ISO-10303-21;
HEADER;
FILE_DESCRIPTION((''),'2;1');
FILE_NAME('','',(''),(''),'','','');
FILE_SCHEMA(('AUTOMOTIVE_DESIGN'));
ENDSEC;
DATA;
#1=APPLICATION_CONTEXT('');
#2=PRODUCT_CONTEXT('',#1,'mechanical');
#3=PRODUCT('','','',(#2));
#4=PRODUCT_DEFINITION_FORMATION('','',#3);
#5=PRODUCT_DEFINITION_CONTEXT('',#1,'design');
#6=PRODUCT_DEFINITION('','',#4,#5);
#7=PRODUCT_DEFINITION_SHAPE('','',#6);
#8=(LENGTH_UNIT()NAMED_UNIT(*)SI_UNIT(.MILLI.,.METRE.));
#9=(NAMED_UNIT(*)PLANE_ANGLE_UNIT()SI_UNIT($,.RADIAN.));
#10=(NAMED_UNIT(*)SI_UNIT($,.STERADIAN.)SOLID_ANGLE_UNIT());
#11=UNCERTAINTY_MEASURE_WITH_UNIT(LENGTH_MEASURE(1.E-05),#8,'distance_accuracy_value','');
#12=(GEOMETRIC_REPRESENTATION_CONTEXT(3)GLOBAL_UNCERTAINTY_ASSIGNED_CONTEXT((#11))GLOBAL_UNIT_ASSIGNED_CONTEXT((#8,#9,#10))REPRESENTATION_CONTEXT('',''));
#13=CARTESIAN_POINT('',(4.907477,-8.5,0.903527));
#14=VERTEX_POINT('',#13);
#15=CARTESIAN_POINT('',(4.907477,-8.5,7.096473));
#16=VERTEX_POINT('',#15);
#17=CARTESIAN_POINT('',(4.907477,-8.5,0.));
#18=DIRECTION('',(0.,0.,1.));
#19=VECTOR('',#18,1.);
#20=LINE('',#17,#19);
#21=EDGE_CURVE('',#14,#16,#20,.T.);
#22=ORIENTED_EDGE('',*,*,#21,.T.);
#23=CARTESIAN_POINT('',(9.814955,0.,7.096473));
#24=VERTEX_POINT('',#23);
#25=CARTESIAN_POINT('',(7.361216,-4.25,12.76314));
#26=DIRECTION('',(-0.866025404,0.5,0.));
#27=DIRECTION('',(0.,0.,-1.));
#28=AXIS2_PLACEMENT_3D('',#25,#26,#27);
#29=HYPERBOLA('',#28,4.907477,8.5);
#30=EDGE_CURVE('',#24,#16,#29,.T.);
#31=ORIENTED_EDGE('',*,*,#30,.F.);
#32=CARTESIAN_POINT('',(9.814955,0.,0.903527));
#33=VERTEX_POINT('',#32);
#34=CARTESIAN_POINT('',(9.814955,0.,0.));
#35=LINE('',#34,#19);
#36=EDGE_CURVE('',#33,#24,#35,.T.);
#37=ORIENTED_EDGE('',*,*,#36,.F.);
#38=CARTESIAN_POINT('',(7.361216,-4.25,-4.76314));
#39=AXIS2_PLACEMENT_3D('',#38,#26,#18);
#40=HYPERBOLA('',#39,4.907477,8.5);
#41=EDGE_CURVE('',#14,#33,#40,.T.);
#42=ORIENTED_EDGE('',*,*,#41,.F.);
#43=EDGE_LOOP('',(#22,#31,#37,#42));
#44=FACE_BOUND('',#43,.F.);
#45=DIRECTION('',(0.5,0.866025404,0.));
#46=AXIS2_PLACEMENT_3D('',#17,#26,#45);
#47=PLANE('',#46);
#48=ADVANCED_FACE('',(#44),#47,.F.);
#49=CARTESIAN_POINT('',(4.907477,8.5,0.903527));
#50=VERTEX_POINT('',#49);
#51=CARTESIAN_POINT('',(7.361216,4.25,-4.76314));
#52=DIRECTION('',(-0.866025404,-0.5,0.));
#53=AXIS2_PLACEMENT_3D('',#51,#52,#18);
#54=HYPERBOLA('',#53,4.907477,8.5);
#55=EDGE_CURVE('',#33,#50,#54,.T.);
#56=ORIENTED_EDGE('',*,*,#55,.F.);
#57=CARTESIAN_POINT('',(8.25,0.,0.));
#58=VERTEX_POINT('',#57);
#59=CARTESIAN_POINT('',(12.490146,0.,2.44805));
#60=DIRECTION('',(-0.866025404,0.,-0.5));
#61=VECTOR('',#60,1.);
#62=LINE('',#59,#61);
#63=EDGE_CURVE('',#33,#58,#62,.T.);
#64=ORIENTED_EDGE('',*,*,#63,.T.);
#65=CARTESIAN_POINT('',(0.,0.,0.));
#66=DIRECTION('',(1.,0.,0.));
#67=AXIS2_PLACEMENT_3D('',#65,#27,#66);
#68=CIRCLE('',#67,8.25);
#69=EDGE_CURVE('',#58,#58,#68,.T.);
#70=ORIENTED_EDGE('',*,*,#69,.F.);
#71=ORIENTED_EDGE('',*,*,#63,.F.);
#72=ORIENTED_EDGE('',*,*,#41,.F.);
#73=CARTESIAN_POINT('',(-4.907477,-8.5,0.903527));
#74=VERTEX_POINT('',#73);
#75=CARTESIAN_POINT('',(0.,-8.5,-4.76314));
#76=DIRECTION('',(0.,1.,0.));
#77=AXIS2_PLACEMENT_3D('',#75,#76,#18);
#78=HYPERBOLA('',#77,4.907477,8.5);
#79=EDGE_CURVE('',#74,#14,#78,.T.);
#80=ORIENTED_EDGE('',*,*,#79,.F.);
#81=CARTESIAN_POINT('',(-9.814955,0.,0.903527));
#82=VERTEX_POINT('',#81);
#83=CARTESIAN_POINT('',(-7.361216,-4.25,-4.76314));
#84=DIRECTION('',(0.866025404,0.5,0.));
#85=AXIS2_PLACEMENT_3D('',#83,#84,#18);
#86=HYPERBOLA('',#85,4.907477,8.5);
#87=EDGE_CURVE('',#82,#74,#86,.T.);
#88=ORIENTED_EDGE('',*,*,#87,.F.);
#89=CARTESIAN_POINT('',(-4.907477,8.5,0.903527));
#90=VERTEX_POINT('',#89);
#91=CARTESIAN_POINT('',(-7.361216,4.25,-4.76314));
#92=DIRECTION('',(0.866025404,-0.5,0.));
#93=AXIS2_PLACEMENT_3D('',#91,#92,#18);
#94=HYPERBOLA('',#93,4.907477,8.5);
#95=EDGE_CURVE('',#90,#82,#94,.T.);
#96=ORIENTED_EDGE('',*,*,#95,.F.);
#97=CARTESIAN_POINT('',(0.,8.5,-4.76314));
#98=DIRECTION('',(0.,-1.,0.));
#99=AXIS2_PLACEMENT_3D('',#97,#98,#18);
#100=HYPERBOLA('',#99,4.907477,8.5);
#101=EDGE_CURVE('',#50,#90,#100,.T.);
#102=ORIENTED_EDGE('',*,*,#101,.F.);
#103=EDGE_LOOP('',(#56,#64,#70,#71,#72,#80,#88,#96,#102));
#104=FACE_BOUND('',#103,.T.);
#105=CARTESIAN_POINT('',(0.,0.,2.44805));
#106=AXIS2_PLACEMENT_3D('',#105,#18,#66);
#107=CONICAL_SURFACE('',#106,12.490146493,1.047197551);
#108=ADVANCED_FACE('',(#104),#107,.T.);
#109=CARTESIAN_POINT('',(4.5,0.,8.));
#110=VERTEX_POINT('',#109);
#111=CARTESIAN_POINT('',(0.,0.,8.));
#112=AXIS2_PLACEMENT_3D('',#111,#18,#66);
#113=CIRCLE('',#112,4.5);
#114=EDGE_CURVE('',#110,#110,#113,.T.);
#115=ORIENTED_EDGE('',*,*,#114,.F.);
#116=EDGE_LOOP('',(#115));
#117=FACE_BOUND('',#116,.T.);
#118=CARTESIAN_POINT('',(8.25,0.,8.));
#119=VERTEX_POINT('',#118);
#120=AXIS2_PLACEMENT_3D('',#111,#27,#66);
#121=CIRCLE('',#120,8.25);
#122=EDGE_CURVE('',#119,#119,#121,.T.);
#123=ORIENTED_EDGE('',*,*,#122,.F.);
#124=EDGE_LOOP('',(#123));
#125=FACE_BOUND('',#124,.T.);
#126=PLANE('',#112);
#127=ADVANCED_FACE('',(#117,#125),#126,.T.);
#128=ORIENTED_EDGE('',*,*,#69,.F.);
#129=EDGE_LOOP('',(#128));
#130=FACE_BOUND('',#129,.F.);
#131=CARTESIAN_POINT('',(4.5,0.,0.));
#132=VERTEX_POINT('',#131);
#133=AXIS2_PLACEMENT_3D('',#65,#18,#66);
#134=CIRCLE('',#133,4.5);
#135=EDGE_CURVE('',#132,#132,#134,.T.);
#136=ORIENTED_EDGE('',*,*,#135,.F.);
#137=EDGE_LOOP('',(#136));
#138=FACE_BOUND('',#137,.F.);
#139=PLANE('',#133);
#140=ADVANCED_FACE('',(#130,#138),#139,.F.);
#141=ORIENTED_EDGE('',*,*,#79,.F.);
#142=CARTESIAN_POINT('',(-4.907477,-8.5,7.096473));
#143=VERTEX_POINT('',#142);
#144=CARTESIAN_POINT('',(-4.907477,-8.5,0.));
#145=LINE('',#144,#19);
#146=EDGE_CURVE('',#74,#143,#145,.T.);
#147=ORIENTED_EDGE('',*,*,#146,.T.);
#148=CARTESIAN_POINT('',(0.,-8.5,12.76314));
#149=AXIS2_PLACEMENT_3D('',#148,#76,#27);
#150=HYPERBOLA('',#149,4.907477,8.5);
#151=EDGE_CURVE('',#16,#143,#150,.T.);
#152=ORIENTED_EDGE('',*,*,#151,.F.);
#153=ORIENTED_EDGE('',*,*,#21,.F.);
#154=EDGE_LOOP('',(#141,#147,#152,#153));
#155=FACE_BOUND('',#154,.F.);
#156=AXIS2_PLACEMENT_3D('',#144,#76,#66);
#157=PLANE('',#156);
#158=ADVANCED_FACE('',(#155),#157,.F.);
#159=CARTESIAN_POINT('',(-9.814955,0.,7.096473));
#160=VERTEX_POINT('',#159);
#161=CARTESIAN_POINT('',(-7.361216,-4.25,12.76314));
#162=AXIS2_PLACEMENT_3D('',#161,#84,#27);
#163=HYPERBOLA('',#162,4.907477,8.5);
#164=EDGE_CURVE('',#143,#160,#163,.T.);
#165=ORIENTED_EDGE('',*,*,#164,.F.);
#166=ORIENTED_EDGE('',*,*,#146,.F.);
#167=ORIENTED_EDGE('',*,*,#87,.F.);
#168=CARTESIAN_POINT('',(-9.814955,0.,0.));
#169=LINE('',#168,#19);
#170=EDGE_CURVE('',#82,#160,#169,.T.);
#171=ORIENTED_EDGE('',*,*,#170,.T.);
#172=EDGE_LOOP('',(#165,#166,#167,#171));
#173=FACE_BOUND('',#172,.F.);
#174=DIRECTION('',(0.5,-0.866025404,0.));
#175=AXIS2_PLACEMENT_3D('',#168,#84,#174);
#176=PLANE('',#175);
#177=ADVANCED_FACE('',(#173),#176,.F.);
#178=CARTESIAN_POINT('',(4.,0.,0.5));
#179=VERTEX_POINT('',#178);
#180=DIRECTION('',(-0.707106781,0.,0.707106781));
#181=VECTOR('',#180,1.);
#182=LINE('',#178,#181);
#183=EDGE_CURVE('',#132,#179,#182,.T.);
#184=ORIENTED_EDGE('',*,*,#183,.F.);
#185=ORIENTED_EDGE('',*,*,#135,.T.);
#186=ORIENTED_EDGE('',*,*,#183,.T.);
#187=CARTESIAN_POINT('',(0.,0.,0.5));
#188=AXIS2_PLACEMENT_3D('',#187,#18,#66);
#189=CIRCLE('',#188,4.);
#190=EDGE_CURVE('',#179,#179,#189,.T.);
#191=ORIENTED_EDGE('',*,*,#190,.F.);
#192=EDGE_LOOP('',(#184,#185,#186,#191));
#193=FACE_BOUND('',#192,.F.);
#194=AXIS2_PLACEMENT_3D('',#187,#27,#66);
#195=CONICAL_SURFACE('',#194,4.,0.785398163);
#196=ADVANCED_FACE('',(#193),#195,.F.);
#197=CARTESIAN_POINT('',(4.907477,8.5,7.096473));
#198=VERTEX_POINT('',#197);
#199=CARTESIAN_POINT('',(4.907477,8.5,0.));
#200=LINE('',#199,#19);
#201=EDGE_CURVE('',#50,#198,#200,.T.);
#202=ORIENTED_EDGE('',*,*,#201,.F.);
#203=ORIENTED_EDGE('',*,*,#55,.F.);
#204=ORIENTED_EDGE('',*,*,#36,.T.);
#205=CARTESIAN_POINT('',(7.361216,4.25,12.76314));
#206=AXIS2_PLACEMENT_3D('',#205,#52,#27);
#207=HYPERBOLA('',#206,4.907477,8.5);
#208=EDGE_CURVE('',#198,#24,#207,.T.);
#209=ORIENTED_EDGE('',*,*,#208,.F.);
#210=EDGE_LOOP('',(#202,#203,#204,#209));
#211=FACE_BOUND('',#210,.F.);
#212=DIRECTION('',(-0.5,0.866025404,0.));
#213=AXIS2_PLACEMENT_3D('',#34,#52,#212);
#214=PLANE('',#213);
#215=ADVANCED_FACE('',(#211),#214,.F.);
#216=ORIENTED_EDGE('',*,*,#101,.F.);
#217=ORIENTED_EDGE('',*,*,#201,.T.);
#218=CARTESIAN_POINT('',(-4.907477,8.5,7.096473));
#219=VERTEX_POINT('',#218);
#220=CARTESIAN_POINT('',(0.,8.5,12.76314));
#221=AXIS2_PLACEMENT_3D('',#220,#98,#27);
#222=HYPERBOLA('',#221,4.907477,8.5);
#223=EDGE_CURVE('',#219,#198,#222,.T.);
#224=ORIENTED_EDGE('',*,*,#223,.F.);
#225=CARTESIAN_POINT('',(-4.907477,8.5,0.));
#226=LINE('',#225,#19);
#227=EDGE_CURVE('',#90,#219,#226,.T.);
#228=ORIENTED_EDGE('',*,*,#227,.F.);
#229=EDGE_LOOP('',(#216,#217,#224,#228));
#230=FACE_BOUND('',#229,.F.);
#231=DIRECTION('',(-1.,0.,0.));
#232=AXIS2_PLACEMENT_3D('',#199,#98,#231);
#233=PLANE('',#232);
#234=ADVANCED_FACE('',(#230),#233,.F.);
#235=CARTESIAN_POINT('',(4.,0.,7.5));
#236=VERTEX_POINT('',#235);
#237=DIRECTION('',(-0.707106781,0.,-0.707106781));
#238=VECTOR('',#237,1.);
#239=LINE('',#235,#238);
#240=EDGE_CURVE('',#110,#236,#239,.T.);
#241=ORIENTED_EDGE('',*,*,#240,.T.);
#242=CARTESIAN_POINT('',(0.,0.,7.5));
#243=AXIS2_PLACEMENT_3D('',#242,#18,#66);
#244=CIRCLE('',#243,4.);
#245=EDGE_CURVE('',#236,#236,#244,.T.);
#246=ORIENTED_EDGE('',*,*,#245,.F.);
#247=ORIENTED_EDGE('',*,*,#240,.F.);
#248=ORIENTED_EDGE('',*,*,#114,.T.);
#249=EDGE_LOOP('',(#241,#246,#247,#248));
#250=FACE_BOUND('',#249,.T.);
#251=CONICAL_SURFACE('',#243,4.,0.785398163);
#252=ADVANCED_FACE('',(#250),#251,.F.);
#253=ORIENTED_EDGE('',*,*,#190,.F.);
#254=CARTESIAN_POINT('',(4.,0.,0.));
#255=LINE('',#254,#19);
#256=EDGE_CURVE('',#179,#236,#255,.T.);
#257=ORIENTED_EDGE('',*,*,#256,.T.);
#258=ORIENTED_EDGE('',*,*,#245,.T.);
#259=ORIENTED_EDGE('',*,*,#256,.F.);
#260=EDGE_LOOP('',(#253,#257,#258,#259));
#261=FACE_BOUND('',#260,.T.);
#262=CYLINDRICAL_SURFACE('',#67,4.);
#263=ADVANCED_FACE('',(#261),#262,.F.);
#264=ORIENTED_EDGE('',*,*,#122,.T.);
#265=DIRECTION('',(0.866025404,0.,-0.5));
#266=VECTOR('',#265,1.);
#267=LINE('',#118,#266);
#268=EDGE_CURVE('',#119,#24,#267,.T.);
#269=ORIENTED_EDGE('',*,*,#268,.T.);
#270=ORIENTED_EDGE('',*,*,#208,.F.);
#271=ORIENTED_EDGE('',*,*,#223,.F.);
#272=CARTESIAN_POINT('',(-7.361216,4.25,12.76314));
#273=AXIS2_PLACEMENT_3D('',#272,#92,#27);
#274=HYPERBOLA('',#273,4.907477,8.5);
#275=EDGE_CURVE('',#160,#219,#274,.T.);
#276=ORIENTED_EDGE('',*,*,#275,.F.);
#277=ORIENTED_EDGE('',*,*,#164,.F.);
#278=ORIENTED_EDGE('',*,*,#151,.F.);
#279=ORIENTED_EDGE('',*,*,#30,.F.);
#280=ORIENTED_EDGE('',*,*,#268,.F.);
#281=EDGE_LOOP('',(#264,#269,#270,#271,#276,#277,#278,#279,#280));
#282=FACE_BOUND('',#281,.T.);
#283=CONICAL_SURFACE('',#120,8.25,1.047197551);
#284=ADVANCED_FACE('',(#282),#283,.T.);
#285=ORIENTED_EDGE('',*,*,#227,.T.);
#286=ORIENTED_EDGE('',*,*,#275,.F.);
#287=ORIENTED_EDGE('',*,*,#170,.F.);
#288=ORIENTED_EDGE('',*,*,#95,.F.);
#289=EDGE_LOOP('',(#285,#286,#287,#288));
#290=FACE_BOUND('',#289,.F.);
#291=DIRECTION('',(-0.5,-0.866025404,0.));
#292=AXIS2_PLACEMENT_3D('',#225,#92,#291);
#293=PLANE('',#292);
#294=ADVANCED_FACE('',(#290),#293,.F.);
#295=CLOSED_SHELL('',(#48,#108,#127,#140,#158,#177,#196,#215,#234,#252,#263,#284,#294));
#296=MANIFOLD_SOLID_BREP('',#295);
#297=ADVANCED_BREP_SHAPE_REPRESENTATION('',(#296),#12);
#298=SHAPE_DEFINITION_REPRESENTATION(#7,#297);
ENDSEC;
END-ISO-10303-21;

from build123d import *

# Parameters (mm, degrees)
F0_R     = 4
F1_DEPTH = 8
F4_SIZE  = 0.5


# Not quite as in the source:
# - a feature of the source that left no trace in its solid (it failed there, or was rolled back) is left out


with BuildPart() as f1:
    # F0 (on Top) → F1 (new body)
    with BuildSketch(Plane.XY):
        Polygon((4.9074772881, -8.5), (9.8149545762, 0), (4.9074772881, 8.5), (-4.9074772881, 8.5), (-9.8149545762, 0), (-4.9074772881, -8.5), align=None)
        Circle(F0_R, mode=Mode.SUBTRACT)
    extrude(amount=F1_DEPTH)

    # F2 (on Front) → F3 (revolve, cut)
    with BuildSketch(Plane.XZ):
        Polygon((12.4901464933, 8), (8.25, 8), (12.4901464933, 5.5519502807), align=None)
        Polygon((12.4901464933, 2.4480497193), (8.25, 0), (12.4901464933, 0), align=None)
    revolve(axis=Axis((0, 0, 3.4472336993), (0, 0, -1)), mode=Mode.SUBTRACT)

    # F4
    f4_edges = [f1.edges().sort_by_distance(p)[0] for p in [
        (-4, 0, 8),
        (-4, 0, 0),
    ]]
    chamfer(f4_edges, length=F4_SIZE)


solid = f1.part
